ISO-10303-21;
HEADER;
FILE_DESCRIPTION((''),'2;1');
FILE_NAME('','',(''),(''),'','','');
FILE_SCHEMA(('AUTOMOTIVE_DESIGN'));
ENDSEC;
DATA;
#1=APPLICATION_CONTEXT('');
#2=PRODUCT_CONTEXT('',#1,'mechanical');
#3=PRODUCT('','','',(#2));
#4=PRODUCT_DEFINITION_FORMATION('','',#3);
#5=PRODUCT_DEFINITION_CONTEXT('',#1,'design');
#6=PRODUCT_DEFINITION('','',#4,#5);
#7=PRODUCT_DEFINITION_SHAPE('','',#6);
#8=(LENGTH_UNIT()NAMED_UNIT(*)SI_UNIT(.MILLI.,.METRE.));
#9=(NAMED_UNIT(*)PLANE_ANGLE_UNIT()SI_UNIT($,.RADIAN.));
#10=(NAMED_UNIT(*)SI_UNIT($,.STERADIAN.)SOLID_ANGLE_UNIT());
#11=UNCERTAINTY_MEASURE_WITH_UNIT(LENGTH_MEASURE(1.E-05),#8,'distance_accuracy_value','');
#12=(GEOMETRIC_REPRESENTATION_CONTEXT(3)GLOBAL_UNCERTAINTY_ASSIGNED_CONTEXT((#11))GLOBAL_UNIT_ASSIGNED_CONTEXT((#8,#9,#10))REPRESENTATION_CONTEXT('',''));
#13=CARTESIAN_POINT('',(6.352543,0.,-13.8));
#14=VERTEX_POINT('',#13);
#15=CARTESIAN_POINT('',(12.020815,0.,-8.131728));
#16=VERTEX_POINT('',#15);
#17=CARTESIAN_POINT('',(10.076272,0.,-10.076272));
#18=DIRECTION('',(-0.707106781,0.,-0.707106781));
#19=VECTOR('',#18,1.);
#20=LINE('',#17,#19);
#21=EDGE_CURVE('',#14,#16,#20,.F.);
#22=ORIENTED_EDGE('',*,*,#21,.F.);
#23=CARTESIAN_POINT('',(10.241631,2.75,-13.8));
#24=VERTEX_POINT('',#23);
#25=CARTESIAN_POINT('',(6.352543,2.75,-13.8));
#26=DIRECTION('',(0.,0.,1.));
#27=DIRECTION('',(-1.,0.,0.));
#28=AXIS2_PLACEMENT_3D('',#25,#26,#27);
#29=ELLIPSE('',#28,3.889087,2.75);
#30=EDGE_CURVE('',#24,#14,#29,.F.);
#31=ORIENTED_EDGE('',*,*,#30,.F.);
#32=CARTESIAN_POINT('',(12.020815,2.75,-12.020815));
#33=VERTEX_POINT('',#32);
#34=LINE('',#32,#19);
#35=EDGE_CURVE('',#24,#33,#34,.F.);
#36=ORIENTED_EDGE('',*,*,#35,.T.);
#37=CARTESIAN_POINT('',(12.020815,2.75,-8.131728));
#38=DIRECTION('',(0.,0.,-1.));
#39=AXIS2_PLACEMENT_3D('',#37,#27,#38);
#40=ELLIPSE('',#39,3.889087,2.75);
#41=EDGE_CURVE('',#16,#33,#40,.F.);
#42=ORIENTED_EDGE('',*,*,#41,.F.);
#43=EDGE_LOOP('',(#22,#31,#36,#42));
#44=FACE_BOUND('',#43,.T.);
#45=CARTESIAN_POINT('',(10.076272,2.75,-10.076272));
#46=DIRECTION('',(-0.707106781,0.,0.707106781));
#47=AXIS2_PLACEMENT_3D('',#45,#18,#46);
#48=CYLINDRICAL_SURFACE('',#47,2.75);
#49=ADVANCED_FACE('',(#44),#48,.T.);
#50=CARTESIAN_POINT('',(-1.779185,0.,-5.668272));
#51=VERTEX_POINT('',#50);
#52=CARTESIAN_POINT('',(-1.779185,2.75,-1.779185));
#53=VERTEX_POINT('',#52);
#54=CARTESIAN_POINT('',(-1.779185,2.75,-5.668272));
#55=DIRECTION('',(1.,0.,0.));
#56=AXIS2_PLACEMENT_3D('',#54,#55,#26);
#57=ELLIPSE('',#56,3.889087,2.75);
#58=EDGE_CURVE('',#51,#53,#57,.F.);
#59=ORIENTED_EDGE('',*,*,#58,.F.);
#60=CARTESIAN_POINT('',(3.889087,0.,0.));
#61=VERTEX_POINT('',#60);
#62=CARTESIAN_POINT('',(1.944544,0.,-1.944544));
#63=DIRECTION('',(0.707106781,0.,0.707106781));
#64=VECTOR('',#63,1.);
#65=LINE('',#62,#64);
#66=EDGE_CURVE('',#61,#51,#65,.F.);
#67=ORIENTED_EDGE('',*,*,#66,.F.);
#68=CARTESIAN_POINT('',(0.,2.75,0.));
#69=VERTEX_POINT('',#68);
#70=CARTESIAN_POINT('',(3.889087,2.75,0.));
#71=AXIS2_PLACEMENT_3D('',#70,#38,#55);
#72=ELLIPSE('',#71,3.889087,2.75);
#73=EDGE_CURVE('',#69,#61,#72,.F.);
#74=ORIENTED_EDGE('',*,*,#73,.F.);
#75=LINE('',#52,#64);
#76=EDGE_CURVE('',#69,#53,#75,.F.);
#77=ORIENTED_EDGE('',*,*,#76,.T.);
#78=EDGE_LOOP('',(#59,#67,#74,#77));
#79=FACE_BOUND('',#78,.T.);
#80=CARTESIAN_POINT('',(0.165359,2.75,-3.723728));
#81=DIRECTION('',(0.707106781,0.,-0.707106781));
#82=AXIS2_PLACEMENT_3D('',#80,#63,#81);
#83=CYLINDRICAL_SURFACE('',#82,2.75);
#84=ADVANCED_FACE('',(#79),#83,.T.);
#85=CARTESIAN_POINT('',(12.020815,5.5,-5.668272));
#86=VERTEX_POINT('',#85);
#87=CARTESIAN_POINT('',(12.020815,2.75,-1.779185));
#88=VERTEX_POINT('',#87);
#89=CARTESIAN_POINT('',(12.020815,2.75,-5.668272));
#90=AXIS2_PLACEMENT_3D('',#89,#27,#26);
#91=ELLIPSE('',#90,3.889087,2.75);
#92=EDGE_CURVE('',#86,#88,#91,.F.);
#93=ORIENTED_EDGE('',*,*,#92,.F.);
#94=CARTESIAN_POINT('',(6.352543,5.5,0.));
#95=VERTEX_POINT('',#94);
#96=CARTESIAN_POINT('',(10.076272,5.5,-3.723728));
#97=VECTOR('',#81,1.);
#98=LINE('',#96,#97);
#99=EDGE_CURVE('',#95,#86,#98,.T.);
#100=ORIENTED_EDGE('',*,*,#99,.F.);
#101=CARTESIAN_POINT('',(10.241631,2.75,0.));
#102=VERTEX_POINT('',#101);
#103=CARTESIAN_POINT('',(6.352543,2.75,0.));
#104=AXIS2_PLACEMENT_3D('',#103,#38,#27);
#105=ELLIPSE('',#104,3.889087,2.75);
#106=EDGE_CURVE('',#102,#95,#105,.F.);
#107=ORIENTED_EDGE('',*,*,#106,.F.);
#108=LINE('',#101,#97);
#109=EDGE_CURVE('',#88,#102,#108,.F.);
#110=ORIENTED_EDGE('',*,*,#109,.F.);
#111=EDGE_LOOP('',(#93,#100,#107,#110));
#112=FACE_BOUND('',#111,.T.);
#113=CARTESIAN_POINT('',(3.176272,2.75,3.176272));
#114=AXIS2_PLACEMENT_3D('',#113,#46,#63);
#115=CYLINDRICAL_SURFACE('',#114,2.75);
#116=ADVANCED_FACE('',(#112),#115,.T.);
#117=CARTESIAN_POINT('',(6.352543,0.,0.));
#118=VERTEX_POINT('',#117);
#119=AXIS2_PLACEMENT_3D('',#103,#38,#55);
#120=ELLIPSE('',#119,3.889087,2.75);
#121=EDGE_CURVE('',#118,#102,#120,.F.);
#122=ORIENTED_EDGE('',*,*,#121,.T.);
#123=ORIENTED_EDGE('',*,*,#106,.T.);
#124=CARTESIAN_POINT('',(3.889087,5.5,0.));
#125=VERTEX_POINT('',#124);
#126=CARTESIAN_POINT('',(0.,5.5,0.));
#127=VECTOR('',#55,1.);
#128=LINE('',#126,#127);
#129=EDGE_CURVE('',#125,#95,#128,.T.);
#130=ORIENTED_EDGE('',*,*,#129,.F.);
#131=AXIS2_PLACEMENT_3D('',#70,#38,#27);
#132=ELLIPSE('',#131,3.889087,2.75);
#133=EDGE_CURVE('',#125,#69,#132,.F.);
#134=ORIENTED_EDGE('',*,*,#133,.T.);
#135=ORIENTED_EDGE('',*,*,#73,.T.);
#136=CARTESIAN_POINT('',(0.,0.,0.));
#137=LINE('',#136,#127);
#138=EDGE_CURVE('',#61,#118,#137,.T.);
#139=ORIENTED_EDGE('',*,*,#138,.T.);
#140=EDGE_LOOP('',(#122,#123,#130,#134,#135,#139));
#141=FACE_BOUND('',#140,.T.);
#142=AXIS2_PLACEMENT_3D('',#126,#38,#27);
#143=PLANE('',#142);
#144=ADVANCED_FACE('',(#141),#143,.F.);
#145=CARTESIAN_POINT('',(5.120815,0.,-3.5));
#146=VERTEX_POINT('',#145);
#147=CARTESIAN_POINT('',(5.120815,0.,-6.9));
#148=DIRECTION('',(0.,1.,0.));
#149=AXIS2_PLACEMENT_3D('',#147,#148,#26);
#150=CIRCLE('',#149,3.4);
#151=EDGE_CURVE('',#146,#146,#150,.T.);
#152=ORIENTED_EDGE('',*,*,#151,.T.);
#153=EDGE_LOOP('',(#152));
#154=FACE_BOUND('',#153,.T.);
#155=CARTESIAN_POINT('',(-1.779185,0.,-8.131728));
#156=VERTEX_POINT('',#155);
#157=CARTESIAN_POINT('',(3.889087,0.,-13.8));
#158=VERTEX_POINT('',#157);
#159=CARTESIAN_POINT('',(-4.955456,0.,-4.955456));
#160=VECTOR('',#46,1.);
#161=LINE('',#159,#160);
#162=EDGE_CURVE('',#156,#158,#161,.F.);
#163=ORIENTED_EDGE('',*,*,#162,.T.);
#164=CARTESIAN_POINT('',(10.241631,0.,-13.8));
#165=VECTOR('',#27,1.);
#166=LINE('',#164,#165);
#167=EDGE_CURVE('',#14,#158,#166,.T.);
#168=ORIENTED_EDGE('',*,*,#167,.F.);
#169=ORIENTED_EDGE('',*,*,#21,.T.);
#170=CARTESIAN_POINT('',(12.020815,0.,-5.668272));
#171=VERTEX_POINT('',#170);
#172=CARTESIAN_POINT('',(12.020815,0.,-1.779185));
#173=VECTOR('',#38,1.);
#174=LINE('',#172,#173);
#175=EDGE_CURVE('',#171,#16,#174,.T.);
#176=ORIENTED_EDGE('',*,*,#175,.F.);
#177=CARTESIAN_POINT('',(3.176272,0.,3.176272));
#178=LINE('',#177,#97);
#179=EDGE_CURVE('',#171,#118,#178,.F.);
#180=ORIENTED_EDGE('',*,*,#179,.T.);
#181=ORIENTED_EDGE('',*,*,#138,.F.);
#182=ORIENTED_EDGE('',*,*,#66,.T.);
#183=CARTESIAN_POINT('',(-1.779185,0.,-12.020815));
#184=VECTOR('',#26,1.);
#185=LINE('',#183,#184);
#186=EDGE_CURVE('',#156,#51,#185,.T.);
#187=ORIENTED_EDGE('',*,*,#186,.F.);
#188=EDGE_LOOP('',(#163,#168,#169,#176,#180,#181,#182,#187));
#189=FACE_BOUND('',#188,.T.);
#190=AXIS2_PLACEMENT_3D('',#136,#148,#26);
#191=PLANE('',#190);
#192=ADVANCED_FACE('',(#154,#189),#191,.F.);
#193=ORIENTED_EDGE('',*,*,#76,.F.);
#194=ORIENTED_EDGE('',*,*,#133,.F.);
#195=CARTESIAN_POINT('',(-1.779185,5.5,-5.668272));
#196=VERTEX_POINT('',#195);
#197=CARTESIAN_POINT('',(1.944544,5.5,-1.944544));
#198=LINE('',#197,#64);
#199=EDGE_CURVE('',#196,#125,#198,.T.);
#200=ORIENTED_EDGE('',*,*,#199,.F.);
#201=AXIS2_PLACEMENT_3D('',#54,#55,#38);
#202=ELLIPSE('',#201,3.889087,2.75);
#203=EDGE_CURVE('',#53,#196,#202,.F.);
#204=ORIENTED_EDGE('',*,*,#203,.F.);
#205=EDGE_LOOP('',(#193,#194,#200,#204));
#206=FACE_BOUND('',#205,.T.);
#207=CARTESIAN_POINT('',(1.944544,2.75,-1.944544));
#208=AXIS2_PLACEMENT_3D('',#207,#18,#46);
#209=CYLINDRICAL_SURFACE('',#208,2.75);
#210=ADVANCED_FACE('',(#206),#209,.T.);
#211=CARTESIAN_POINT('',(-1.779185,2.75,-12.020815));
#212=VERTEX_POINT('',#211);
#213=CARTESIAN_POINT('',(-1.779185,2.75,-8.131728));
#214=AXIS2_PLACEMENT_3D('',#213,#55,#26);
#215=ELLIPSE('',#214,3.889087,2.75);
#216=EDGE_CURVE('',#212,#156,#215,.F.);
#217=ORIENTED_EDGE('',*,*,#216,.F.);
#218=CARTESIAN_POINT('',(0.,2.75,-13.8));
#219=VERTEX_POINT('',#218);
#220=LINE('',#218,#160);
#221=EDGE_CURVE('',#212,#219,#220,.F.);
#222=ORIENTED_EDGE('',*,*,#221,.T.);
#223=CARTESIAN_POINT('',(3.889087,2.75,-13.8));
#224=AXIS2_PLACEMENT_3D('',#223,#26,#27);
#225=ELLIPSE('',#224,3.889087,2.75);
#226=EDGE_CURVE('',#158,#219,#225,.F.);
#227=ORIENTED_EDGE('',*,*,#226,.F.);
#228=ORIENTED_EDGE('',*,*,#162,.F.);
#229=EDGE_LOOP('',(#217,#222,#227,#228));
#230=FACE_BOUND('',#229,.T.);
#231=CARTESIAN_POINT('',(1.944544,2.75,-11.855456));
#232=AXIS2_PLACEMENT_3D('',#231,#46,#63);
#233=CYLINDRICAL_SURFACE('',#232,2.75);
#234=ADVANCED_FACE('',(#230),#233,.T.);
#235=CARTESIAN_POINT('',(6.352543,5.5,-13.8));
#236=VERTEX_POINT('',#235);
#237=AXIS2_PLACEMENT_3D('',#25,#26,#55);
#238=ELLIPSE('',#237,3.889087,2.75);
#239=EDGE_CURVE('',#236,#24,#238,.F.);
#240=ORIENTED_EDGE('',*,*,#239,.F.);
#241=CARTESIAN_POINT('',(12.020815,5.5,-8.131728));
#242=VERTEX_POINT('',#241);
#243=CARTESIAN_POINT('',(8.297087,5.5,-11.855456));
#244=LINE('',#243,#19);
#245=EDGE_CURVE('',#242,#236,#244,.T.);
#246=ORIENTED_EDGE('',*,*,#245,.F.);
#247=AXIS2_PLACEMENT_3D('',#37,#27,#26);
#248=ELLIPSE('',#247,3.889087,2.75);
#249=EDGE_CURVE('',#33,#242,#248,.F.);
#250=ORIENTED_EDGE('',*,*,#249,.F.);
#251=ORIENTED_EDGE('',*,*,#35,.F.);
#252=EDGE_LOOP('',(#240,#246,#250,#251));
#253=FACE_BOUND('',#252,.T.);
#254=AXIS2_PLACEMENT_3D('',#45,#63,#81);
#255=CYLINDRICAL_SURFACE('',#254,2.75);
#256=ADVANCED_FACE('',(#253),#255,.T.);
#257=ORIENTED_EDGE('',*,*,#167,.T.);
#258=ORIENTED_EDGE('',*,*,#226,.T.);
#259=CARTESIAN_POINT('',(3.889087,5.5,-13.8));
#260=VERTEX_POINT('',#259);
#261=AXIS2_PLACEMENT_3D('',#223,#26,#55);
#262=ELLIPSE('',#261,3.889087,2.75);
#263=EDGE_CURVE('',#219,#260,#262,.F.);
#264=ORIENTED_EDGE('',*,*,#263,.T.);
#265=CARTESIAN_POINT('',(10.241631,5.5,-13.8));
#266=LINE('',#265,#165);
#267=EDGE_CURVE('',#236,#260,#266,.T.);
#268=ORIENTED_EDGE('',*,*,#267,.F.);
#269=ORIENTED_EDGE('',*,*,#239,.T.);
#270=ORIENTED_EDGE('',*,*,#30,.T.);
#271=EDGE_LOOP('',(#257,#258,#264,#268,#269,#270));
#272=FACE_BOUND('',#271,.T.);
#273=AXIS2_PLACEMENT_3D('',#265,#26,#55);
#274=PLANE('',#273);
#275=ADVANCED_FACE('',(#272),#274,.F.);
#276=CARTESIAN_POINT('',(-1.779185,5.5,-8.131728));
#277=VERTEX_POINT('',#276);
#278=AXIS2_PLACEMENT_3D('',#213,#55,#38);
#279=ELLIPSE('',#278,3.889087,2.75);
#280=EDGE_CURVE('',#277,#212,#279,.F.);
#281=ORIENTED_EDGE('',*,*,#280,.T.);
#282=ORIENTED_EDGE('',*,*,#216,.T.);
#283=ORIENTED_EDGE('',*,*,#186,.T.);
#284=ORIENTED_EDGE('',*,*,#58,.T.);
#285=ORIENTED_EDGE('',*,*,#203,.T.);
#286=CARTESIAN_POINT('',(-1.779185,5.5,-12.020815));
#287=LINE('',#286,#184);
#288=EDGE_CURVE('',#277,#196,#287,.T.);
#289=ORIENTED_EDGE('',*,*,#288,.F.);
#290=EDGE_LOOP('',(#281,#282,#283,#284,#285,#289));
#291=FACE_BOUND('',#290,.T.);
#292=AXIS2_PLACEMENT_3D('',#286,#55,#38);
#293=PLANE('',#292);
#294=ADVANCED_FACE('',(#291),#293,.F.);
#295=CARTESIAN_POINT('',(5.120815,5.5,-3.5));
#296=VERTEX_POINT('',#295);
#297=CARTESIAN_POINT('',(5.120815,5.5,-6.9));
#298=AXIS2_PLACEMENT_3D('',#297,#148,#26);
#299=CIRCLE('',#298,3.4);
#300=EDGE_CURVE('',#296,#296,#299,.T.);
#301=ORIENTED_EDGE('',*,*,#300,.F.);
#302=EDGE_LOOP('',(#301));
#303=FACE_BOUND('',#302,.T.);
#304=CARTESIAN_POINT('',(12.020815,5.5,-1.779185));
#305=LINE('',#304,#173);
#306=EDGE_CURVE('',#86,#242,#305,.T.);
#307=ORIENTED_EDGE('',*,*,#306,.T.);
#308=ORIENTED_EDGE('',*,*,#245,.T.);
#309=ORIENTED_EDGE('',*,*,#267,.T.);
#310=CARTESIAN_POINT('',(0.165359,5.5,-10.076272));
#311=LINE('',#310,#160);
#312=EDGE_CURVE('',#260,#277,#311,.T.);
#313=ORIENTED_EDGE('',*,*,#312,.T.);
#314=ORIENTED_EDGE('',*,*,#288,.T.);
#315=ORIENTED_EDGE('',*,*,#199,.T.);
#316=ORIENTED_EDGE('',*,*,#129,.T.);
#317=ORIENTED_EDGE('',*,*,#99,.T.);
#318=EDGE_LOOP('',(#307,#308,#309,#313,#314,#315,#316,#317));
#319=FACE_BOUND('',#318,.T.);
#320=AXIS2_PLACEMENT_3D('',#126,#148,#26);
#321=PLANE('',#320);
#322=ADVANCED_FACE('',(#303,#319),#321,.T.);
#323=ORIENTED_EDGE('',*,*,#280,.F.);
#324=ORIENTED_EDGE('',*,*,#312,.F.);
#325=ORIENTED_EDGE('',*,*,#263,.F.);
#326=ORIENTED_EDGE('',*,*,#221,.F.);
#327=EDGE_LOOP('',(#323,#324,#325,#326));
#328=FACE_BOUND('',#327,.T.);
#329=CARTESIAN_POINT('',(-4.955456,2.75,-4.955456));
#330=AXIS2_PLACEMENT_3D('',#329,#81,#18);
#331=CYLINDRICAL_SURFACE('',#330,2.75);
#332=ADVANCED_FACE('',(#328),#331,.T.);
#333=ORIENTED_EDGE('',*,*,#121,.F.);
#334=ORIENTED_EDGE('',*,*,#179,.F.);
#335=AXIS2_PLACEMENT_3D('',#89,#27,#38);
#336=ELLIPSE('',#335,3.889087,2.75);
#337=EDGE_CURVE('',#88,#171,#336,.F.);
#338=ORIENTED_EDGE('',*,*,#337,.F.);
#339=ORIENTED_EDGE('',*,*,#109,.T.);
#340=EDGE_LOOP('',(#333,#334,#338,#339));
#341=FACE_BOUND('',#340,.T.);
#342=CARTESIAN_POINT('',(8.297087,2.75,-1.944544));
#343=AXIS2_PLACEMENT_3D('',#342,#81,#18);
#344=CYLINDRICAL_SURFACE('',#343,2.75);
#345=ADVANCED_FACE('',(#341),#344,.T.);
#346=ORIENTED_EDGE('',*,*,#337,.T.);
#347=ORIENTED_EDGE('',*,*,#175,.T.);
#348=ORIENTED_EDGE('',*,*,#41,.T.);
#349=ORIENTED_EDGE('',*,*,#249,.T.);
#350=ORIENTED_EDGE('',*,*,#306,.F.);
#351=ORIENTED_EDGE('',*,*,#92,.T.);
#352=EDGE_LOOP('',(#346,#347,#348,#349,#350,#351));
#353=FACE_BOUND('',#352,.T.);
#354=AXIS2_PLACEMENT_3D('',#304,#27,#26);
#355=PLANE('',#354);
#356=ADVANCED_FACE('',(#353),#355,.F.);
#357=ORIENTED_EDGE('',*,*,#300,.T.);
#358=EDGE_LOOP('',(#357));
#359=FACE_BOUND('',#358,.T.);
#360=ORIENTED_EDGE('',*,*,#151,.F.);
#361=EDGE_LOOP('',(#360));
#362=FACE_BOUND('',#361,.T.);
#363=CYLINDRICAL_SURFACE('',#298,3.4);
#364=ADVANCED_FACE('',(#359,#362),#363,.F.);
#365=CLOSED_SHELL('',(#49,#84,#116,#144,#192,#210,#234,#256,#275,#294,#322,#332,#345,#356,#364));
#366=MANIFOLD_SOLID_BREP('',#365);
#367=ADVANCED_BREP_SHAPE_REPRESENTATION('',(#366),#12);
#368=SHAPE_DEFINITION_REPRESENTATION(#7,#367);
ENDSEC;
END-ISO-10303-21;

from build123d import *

# Parameters (mm, degrees)
EXTRUDE_1_DEPTH        = 5.5
FILLET_1_R             = 2.75
HOLE_WIZARD_M8_1_D     = 6.8
HOLE_WIZARD_M8_1_DEPTH = 19.75
HOLE_WIZARD_M8_1_TIP   = 2.042926105


with BuildPart() as part:
    # 草图1 → 凸台-拉伸1 (new body)
    with BuildSketch(Plane(origin=(0, 0, 0), x_dir=(1, 0, 0), z_dir=(0, 1, 0))):
        Polygon((0, 0), (10.24163056, 0), (12.02081528, 1.77918472), (12.02081528, 12.02081528), (10.24163056, 13.8), (0, 13.8), (-1.77918472, 12.02081528), (-1.77918472, 1.77918472), align=None)
    extrude(amount=EXTRUDE_1_DEPTH)

    # 圆角1
    fillet_1_edges = [part.edges().sort_by_distance(p)[0] for p in [
        (-0.88959236, 0, -12.91040764),
        (-0.88959236, 5.5, -12.91040764),
        (11.13122292, 0, -12.91040764),
        (11.13122292, 5.5, -12.91040764),
        (11.13122292, 0, -0.88959236),
        (11.13122292, 5.5, -0.88959236),
        (-0.88959236, 0, -0.88959236),
        (-0.88959236, 5.5, -0.88959236),
    ]]
    fillet(fillet_1_edges, radius=FILLET_1_R - 0.0001)  # a hair under: the kernel refuses the full size

    # M8 螺纹孔1
    with Locations(Plane(origin=(5.12081528, 5.5, -6.9), x_dir=(0, 0, 1), z_dir=(0, 1, 0))):
        with Locations((0, 0)):
            Hole(HOLE_WIZARD_M8_1_D / 2, depth=HOLE_WIZARD_M8_1_DEPTH)
            with Locations((0, 0, -(HOLE_WIZARD_M8_1_DEPTH + HOLE_WIZARD_M8_1_TIP / 2))):  # 118° drill point
                Cone(0, HOLE_WIZARD_M8_1_D / 2, HOLE_WIZARD_M8_1_TIP, mode=Mode.SUBTRACT)


solid = part.part
